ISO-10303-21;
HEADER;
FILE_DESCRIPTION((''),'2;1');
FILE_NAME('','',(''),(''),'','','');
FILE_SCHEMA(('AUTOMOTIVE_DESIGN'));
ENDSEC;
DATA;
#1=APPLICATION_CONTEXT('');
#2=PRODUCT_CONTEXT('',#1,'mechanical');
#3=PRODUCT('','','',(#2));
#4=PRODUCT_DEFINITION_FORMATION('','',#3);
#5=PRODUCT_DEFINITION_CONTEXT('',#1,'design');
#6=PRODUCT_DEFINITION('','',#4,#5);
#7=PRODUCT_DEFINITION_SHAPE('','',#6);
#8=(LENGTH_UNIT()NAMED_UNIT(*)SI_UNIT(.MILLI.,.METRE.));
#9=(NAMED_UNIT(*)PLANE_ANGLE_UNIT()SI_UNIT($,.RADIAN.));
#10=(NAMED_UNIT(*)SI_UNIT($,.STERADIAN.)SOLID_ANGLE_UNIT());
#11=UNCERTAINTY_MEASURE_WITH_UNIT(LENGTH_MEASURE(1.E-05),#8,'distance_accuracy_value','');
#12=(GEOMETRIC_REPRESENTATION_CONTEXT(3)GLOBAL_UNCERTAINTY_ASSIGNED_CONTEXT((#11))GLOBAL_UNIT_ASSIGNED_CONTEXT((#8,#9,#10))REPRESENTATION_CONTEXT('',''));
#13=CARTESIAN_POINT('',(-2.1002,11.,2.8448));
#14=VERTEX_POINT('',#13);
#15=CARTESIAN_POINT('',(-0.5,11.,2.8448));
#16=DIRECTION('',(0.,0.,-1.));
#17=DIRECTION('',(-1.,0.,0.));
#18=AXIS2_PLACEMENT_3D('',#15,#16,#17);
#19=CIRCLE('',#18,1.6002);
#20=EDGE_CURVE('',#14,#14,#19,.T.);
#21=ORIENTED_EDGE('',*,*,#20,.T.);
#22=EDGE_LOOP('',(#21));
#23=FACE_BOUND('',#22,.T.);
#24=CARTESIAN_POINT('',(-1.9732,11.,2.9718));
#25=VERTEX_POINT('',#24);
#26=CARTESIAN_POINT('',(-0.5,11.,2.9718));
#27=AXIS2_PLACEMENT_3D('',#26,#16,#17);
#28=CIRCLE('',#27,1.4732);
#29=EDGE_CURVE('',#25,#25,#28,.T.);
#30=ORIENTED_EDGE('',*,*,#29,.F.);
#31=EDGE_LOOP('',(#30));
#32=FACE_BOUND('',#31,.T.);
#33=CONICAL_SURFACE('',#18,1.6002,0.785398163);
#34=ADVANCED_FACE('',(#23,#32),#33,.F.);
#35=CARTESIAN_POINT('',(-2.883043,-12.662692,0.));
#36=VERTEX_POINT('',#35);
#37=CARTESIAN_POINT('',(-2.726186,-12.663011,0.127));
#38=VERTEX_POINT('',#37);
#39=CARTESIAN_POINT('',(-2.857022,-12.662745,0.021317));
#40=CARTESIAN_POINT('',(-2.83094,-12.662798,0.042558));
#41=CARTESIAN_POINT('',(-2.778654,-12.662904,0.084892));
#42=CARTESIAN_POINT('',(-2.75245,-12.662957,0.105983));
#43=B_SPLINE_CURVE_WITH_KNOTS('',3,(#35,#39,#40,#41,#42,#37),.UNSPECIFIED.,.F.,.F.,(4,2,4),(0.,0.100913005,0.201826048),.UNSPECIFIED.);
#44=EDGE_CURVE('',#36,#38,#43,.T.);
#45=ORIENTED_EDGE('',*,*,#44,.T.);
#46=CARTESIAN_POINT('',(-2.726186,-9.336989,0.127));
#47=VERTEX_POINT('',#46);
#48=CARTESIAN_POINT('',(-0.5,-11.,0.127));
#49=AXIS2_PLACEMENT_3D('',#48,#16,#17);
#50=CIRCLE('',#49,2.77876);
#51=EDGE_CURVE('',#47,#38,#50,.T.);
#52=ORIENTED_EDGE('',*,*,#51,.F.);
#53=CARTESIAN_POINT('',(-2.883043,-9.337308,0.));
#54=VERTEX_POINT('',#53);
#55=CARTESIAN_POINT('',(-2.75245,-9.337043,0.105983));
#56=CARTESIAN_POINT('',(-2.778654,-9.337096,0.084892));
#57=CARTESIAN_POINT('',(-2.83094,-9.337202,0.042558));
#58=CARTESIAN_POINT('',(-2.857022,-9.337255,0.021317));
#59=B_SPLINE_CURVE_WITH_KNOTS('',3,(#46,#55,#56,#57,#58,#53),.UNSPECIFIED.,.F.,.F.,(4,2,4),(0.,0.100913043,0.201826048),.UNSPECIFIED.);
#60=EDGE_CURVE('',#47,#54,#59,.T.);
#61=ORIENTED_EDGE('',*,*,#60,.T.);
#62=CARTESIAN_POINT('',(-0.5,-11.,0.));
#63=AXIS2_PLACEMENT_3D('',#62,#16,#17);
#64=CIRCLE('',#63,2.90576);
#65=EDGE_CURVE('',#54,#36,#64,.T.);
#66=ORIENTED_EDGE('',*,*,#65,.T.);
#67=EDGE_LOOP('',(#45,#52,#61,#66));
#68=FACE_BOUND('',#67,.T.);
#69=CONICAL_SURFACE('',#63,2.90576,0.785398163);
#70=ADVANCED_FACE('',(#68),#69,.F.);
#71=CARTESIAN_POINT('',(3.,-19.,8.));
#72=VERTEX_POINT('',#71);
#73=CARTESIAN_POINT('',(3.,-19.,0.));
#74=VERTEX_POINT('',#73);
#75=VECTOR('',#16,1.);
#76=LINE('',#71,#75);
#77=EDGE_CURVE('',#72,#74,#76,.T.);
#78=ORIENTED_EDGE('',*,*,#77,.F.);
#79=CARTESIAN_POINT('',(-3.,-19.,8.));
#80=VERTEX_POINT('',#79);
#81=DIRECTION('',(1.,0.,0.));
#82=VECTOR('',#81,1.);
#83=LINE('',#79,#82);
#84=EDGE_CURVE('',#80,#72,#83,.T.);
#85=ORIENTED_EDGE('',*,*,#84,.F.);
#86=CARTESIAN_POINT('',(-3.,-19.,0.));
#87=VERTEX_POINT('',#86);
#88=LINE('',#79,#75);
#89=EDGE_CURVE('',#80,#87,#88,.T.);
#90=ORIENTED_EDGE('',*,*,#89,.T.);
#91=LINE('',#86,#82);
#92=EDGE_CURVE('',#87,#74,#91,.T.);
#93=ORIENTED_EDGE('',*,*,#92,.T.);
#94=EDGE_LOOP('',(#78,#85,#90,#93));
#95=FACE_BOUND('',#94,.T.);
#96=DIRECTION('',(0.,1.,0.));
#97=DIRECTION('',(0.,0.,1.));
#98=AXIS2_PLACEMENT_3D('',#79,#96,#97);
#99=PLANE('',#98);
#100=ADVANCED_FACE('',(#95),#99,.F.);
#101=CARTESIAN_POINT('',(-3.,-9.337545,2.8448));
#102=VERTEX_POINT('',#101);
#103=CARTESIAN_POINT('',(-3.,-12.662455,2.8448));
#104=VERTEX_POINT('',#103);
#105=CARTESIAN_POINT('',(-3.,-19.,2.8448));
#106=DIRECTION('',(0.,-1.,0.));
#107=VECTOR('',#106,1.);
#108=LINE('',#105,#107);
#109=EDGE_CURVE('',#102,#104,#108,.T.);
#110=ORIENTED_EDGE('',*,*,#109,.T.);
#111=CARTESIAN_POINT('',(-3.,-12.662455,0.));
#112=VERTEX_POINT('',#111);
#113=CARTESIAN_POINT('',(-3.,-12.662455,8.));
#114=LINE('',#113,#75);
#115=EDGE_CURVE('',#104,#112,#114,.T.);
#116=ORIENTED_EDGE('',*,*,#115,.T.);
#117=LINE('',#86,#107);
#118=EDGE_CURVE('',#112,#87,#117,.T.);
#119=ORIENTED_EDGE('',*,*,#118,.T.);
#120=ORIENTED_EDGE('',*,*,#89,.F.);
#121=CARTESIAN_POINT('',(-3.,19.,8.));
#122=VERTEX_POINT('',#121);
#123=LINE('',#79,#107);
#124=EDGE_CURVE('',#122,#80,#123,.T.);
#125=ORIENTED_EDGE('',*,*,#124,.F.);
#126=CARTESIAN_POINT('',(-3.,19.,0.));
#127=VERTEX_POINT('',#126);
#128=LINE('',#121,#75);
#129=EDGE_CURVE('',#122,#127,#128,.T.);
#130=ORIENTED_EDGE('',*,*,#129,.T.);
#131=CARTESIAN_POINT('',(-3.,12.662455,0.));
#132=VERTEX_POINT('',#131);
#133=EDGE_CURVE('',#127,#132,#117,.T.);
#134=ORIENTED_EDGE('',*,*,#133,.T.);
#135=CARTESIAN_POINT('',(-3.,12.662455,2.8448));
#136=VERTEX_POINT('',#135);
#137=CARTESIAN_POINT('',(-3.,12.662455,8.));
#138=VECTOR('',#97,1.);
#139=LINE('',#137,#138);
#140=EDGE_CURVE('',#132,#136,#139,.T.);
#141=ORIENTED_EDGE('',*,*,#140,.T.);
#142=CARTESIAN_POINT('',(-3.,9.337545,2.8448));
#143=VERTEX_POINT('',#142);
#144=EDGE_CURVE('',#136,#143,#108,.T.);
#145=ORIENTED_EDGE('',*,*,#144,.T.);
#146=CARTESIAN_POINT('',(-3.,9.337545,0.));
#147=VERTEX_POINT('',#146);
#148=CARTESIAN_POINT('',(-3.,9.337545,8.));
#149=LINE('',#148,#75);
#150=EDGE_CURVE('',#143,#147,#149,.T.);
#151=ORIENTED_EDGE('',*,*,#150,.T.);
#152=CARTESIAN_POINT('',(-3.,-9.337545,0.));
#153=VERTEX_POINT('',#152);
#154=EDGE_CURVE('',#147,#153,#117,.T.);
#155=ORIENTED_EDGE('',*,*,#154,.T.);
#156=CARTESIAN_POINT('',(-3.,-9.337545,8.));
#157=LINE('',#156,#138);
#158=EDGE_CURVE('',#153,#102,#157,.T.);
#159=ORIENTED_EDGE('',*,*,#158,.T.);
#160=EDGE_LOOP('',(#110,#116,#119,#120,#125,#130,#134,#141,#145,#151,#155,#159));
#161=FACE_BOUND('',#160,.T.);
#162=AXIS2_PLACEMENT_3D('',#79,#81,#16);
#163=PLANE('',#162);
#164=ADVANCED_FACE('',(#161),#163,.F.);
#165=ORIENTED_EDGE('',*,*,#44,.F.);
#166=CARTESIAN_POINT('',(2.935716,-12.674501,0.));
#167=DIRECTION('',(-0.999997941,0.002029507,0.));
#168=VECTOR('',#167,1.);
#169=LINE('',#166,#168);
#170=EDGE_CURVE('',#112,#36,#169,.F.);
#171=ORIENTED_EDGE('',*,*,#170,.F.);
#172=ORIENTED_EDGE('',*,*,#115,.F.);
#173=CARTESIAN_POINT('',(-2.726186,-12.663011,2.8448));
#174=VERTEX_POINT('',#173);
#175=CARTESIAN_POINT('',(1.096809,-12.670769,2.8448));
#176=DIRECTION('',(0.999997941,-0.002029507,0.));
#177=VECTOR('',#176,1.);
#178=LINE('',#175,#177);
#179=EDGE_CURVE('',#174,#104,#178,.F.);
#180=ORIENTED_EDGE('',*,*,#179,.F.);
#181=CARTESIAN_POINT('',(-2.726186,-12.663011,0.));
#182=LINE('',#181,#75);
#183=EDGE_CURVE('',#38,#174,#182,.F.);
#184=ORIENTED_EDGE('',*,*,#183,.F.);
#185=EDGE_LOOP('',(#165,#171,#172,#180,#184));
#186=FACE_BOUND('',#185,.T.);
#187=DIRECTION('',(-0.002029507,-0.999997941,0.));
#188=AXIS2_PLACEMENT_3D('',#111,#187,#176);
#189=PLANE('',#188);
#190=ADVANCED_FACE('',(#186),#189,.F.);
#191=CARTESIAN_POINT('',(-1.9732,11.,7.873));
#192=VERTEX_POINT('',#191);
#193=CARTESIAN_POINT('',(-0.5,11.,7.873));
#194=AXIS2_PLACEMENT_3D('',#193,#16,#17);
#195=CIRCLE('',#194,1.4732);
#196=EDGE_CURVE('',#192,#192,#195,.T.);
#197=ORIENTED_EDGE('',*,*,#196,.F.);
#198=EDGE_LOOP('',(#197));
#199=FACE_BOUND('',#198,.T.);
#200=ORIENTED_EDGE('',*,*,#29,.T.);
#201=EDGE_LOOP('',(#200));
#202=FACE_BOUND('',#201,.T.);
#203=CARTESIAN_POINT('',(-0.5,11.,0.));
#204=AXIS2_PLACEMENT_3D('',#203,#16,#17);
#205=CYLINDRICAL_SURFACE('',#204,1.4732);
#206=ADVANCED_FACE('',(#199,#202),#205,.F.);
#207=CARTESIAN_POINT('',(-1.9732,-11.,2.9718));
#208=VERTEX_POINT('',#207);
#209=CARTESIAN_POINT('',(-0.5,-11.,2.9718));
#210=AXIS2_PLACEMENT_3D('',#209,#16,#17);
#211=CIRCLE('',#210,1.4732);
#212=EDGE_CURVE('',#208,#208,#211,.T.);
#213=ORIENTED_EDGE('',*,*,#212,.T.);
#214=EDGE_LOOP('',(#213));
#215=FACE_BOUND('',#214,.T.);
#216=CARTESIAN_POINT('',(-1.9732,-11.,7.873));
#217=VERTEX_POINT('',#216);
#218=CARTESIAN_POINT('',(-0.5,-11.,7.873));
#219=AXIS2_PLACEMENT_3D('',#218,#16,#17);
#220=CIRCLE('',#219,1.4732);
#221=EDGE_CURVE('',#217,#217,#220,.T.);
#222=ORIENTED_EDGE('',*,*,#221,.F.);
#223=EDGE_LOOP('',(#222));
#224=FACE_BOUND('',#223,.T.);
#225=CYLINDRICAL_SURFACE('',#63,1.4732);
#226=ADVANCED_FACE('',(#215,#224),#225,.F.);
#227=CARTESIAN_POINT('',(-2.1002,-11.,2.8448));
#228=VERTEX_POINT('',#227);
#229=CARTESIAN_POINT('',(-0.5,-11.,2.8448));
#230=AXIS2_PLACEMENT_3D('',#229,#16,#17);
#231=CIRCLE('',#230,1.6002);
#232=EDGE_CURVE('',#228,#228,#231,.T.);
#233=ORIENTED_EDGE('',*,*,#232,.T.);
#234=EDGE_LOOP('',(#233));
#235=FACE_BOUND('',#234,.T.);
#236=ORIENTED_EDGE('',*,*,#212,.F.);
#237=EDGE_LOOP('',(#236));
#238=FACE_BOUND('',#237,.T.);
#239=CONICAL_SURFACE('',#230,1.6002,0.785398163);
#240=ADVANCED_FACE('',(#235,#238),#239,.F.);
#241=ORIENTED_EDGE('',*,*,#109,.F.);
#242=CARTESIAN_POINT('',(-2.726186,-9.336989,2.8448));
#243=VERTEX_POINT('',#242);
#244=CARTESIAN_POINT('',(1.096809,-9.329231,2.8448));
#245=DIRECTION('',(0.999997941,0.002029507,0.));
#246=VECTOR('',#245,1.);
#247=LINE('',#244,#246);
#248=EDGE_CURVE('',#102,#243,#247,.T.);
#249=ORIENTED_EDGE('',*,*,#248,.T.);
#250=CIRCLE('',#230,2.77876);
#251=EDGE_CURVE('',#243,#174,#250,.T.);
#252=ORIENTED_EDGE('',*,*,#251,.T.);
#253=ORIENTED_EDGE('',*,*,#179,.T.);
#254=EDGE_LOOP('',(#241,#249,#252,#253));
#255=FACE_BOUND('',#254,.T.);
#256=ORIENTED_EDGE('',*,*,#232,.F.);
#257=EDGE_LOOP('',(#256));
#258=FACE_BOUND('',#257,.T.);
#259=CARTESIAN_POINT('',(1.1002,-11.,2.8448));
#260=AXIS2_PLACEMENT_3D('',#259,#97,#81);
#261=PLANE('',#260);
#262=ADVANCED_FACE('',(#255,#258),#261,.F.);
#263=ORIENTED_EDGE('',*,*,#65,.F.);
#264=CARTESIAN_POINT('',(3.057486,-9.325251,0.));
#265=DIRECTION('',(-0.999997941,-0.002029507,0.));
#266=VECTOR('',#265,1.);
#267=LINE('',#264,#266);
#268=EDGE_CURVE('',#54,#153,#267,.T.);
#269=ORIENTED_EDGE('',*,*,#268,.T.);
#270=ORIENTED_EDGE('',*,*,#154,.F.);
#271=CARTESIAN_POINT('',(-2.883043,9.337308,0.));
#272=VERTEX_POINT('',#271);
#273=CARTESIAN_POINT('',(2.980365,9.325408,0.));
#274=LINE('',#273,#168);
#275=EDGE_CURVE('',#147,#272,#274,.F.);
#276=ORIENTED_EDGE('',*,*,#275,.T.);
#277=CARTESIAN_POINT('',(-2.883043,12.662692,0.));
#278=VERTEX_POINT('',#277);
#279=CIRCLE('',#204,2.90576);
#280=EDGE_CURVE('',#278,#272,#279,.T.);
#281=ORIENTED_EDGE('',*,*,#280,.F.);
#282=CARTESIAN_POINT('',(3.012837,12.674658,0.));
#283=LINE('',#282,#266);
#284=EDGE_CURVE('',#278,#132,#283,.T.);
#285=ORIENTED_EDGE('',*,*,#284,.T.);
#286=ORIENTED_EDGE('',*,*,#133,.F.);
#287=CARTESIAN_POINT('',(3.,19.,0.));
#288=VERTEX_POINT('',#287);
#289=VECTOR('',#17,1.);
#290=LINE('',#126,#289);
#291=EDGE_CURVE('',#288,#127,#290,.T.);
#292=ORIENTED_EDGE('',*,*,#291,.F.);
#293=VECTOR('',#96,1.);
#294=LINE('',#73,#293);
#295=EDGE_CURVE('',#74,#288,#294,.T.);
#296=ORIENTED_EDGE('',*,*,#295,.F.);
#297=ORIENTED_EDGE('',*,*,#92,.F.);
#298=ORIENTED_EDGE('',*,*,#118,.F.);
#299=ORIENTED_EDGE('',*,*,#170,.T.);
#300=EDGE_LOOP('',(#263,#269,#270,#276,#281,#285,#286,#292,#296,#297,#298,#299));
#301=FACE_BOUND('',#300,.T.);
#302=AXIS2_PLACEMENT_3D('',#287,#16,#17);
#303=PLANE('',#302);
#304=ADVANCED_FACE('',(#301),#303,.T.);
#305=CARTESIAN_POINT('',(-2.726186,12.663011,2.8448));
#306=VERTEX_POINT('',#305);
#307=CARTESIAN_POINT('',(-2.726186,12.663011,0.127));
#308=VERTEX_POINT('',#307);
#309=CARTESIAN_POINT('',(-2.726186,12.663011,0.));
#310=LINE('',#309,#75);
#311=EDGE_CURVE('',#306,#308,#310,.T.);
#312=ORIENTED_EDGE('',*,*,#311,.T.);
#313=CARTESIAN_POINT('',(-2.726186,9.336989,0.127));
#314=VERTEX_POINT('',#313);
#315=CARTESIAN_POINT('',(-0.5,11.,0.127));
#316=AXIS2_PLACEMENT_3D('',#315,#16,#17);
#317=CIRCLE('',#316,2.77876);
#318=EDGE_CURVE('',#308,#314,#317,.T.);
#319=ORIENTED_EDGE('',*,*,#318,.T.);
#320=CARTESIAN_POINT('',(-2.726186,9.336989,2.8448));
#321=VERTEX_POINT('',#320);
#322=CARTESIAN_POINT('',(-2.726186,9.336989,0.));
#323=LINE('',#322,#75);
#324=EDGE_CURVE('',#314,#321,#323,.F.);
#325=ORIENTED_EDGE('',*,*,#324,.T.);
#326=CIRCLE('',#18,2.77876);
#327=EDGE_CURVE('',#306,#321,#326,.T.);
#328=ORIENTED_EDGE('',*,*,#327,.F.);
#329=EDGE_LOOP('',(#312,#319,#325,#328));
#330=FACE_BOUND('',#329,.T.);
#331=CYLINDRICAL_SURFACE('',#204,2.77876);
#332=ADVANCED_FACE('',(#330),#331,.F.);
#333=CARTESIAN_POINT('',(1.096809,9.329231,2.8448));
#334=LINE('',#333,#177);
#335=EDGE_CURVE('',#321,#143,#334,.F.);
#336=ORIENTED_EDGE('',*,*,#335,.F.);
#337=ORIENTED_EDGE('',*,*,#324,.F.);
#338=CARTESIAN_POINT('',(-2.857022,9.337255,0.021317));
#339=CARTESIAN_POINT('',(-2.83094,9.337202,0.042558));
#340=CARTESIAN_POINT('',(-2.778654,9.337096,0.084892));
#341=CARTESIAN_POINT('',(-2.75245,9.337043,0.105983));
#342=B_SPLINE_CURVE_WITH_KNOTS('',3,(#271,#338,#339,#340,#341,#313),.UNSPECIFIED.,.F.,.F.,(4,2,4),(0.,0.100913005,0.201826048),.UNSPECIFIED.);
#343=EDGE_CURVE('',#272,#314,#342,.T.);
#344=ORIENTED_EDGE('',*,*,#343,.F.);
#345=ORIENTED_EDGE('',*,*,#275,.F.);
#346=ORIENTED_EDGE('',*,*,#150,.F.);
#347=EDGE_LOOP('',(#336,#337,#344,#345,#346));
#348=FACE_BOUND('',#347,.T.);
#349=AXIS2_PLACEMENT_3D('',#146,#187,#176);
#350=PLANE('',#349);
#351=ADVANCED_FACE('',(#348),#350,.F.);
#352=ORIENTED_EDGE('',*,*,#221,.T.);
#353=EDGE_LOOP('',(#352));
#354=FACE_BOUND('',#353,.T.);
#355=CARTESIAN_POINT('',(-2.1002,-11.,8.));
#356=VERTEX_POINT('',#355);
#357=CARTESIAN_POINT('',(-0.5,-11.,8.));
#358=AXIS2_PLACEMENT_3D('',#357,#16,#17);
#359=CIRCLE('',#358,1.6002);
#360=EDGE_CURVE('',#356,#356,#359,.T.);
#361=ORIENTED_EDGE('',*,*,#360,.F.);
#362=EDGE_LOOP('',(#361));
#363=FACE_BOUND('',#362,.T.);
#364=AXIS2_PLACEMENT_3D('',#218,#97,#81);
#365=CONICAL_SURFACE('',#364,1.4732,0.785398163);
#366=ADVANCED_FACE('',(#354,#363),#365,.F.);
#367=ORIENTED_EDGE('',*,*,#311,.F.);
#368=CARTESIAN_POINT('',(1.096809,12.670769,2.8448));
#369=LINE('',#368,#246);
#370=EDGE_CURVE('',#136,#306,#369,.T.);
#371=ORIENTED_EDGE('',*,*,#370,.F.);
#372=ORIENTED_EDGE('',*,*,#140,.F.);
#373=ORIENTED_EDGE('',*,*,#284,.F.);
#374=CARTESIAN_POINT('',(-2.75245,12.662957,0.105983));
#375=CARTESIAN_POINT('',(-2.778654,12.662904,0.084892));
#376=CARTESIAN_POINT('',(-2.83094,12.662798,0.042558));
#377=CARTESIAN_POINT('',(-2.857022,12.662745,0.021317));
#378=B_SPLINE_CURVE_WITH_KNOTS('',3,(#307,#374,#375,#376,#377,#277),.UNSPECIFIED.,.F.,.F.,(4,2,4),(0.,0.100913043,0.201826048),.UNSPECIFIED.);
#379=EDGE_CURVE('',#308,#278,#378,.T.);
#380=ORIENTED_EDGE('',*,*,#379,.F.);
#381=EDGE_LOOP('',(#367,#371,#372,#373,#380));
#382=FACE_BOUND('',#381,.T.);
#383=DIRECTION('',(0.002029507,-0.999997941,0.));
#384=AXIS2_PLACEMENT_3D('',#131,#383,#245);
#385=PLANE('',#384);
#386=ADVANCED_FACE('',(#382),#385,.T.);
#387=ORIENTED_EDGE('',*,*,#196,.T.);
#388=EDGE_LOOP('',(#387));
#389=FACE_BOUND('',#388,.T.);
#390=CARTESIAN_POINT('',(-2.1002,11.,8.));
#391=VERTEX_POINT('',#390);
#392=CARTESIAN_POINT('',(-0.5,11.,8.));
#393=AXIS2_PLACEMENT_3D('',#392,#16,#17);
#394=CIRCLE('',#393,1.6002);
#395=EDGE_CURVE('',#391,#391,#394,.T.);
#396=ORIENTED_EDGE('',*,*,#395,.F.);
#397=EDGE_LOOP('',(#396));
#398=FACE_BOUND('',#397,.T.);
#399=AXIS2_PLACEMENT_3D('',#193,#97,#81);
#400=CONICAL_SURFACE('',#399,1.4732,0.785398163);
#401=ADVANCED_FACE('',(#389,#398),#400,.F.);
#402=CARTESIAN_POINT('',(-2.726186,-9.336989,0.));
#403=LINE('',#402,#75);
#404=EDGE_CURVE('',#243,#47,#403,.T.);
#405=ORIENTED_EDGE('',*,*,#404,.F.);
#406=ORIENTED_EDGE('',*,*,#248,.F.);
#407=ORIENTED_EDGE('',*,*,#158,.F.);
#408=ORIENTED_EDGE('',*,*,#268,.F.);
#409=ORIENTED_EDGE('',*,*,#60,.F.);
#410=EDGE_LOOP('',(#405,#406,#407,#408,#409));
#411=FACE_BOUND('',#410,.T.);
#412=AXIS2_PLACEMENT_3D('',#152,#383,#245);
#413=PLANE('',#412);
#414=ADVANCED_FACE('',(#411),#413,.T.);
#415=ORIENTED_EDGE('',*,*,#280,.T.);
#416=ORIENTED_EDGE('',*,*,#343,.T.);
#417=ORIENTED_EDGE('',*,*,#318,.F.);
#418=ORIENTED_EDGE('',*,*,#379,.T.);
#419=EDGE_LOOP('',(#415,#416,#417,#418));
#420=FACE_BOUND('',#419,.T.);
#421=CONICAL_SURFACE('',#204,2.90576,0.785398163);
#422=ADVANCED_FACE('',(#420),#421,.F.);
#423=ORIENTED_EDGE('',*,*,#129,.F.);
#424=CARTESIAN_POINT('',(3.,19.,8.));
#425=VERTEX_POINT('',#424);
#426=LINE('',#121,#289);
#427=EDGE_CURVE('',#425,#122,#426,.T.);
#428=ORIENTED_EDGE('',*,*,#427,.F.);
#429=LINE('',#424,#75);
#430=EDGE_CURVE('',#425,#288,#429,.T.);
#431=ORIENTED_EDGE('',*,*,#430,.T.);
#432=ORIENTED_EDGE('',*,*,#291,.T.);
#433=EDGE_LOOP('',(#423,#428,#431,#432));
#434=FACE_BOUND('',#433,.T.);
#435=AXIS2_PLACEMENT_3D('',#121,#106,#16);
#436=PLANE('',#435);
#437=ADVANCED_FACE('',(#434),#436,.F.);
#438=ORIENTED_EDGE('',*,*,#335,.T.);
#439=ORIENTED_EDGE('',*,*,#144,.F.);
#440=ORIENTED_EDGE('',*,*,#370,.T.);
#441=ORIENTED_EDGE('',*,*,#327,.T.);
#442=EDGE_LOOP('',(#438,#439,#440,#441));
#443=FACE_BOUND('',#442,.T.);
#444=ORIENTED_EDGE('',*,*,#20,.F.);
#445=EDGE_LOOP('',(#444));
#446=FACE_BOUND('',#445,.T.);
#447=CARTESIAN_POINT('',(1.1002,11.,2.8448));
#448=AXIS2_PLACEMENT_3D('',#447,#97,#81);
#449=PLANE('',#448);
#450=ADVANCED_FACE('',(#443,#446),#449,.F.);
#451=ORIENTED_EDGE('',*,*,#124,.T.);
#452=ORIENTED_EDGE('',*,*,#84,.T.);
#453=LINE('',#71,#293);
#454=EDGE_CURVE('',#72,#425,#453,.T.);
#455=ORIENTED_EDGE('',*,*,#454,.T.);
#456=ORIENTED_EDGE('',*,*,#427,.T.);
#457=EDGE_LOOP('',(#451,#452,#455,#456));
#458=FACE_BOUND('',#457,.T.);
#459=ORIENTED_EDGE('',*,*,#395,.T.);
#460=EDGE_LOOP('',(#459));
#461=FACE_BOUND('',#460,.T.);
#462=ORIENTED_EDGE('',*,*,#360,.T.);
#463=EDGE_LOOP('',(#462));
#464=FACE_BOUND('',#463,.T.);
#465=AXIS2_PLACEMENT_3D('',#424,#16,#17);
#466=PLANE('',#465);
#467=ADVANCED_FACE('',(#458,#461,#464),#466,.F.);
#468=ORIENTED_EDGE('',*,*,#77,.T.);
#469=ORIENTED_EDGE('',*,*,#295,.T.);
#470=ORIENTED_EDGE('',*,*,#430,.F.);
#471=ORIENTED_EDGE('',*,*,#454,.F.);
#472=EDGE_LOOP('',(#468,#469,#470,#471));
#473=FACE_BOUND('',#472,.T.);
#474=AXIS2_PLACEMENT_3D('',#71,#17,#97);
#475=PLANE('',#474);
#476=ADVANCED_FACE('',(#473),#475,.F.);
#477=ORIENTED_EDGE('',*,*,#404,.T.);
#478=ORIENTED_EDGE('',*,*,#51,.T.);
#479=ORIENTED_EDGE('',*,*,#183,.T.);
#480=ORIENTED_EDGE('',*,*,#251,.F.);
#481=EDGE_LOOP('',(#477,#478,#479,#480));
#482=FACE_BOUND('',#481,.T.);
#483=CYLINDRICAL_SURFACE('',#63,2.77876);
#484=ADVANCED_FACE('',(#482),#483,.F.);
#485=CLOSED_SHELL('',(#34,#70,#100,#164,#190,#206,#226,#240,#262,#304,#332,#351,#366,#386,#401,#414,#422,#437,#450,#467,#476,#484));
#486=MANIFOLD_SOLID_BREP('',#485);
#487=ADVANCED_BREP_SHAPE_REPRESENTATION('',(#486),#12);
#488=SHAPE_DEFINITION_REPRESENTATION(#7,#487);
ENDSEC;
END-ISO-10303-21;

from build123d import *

# Parameters (mm, degrees)
SKETCH_1_W                = 6
SKETCH_1_H                = 38
EXTRUDE_1_DEPTH           = 8
HOLE_WIZARD_41_AT_2_COUNT = 2
HOLE_WIZARD_41_AT_2_PITCH = 22
CHAMFER_1_SIZE            = 0.449397949


with BuildPart() as part:
    # Эскиз1 → Бобышка-Вытянуть1 (new body)
    with BuildSketch(Plane.XY):
        Rectangle(SKETCH_1_W, SKETCH_1_H)
    extrude(amount=EXTRUDE_1_DEPTH)

    # Эскиз2 → Цековка для  винта с внутренним шестигранником #41 (revolve, cut)
    with BuildSketch(Plane(origin=(-0.5, 11, 0), x_dir=(0, 1, 0), z_dir=(1, 0, 0))):
        Polygon((0, 0), (0, 8), (1.6002, 8), (1.4732, 7.873), (1.4732, 2.9718), (1.6002, 2.8448), (2.77876, 2.8448), (2.77876, 0.127), (2.90576, 0), align=None)
    hole_wizard_41 = revolve(axis=Axis((-0.5, 11, -6.35), (0, 0, 1)), mode=Mode.SUBTRACT)

    # Цековка для  винта с внутренним шестигранником #41 at 2: Цековка для  винта с внутренним шестигранником #41 ×2
    with Locations(*[(0, -i * HOLE_WIZARD_41_AT_2_PITCH, 0) for i in range(1, HOLE_WIZARD_41_AT_2_COUNT)]):
        add(hole_wizard_41, mode=Mode.SUBTRACT)

    # Фаска1
    # the kernel refuses this chamfer: 0.5, 0.449397949 mm, written as the material it takes off along each edge
    with BuildSketch(Plane(origin=(-3, -9.786943061, 2.8448), x_dir=(0.5198491944846584, 0.8542580494169496, 0), z_dir=(0, 0, -1)), Plane(origin=(-3, 12.213056939, 2.8448), x_dir=(0.5198491944846584, 0.8542580494169496, 0), z_dir=(0, 0, -1))) as chamfer_1_piece_1:
        with BuildLine():
            Line((0.526718663, 0), (CHAMFER_1_SIZE * 0.854258048776, -CHAMFER_1_SIZE * 0.519849194094))
            Line((CHAMFER_1_SIZE * 0.854258048776, -CHAMFER_1_SIZE * 0.519849194094), (0, 0))
            ThreePointArc((0, 0), (0.268614935, -0.012503234), (0.526718663, 0))
        make_face()
    extrude(amount=4.061353185, mode=Mode.SUBTRACT)
    with BuildSketch(Plane(origin=(-3, -12.213056939, 2.8448), x_dir=(0.519849194484659, -0.8542580494169493, 0), z_dir=(0, 0, -1)), Plane(origin=(-3, 9.786943061, 2.8448), x_dir=(0.519849194484659, -0.8542580494169493, 0), z_dir=(0, 0, -1))) as chamfer_1_piece_2:
        with BuildLine():
            Line((0.526718663, 0), (CHAMFER_1_SIZE * 0.854258048776, CHAMFER_1_SIZE * 0.519849194094))
            Line((CHAMFER_1_SIZE * 0.854258048776, CHAMFER_1_SIZE * 0.519849194094), (0, 0))
            ThreePointArc((0, 0), (0.268614935, 0.012503234), (0.526718663, 0))
        make_face()
    extrude(amount=4.061353185, mode=Mode.SUBTRACT)


solid = part.part
